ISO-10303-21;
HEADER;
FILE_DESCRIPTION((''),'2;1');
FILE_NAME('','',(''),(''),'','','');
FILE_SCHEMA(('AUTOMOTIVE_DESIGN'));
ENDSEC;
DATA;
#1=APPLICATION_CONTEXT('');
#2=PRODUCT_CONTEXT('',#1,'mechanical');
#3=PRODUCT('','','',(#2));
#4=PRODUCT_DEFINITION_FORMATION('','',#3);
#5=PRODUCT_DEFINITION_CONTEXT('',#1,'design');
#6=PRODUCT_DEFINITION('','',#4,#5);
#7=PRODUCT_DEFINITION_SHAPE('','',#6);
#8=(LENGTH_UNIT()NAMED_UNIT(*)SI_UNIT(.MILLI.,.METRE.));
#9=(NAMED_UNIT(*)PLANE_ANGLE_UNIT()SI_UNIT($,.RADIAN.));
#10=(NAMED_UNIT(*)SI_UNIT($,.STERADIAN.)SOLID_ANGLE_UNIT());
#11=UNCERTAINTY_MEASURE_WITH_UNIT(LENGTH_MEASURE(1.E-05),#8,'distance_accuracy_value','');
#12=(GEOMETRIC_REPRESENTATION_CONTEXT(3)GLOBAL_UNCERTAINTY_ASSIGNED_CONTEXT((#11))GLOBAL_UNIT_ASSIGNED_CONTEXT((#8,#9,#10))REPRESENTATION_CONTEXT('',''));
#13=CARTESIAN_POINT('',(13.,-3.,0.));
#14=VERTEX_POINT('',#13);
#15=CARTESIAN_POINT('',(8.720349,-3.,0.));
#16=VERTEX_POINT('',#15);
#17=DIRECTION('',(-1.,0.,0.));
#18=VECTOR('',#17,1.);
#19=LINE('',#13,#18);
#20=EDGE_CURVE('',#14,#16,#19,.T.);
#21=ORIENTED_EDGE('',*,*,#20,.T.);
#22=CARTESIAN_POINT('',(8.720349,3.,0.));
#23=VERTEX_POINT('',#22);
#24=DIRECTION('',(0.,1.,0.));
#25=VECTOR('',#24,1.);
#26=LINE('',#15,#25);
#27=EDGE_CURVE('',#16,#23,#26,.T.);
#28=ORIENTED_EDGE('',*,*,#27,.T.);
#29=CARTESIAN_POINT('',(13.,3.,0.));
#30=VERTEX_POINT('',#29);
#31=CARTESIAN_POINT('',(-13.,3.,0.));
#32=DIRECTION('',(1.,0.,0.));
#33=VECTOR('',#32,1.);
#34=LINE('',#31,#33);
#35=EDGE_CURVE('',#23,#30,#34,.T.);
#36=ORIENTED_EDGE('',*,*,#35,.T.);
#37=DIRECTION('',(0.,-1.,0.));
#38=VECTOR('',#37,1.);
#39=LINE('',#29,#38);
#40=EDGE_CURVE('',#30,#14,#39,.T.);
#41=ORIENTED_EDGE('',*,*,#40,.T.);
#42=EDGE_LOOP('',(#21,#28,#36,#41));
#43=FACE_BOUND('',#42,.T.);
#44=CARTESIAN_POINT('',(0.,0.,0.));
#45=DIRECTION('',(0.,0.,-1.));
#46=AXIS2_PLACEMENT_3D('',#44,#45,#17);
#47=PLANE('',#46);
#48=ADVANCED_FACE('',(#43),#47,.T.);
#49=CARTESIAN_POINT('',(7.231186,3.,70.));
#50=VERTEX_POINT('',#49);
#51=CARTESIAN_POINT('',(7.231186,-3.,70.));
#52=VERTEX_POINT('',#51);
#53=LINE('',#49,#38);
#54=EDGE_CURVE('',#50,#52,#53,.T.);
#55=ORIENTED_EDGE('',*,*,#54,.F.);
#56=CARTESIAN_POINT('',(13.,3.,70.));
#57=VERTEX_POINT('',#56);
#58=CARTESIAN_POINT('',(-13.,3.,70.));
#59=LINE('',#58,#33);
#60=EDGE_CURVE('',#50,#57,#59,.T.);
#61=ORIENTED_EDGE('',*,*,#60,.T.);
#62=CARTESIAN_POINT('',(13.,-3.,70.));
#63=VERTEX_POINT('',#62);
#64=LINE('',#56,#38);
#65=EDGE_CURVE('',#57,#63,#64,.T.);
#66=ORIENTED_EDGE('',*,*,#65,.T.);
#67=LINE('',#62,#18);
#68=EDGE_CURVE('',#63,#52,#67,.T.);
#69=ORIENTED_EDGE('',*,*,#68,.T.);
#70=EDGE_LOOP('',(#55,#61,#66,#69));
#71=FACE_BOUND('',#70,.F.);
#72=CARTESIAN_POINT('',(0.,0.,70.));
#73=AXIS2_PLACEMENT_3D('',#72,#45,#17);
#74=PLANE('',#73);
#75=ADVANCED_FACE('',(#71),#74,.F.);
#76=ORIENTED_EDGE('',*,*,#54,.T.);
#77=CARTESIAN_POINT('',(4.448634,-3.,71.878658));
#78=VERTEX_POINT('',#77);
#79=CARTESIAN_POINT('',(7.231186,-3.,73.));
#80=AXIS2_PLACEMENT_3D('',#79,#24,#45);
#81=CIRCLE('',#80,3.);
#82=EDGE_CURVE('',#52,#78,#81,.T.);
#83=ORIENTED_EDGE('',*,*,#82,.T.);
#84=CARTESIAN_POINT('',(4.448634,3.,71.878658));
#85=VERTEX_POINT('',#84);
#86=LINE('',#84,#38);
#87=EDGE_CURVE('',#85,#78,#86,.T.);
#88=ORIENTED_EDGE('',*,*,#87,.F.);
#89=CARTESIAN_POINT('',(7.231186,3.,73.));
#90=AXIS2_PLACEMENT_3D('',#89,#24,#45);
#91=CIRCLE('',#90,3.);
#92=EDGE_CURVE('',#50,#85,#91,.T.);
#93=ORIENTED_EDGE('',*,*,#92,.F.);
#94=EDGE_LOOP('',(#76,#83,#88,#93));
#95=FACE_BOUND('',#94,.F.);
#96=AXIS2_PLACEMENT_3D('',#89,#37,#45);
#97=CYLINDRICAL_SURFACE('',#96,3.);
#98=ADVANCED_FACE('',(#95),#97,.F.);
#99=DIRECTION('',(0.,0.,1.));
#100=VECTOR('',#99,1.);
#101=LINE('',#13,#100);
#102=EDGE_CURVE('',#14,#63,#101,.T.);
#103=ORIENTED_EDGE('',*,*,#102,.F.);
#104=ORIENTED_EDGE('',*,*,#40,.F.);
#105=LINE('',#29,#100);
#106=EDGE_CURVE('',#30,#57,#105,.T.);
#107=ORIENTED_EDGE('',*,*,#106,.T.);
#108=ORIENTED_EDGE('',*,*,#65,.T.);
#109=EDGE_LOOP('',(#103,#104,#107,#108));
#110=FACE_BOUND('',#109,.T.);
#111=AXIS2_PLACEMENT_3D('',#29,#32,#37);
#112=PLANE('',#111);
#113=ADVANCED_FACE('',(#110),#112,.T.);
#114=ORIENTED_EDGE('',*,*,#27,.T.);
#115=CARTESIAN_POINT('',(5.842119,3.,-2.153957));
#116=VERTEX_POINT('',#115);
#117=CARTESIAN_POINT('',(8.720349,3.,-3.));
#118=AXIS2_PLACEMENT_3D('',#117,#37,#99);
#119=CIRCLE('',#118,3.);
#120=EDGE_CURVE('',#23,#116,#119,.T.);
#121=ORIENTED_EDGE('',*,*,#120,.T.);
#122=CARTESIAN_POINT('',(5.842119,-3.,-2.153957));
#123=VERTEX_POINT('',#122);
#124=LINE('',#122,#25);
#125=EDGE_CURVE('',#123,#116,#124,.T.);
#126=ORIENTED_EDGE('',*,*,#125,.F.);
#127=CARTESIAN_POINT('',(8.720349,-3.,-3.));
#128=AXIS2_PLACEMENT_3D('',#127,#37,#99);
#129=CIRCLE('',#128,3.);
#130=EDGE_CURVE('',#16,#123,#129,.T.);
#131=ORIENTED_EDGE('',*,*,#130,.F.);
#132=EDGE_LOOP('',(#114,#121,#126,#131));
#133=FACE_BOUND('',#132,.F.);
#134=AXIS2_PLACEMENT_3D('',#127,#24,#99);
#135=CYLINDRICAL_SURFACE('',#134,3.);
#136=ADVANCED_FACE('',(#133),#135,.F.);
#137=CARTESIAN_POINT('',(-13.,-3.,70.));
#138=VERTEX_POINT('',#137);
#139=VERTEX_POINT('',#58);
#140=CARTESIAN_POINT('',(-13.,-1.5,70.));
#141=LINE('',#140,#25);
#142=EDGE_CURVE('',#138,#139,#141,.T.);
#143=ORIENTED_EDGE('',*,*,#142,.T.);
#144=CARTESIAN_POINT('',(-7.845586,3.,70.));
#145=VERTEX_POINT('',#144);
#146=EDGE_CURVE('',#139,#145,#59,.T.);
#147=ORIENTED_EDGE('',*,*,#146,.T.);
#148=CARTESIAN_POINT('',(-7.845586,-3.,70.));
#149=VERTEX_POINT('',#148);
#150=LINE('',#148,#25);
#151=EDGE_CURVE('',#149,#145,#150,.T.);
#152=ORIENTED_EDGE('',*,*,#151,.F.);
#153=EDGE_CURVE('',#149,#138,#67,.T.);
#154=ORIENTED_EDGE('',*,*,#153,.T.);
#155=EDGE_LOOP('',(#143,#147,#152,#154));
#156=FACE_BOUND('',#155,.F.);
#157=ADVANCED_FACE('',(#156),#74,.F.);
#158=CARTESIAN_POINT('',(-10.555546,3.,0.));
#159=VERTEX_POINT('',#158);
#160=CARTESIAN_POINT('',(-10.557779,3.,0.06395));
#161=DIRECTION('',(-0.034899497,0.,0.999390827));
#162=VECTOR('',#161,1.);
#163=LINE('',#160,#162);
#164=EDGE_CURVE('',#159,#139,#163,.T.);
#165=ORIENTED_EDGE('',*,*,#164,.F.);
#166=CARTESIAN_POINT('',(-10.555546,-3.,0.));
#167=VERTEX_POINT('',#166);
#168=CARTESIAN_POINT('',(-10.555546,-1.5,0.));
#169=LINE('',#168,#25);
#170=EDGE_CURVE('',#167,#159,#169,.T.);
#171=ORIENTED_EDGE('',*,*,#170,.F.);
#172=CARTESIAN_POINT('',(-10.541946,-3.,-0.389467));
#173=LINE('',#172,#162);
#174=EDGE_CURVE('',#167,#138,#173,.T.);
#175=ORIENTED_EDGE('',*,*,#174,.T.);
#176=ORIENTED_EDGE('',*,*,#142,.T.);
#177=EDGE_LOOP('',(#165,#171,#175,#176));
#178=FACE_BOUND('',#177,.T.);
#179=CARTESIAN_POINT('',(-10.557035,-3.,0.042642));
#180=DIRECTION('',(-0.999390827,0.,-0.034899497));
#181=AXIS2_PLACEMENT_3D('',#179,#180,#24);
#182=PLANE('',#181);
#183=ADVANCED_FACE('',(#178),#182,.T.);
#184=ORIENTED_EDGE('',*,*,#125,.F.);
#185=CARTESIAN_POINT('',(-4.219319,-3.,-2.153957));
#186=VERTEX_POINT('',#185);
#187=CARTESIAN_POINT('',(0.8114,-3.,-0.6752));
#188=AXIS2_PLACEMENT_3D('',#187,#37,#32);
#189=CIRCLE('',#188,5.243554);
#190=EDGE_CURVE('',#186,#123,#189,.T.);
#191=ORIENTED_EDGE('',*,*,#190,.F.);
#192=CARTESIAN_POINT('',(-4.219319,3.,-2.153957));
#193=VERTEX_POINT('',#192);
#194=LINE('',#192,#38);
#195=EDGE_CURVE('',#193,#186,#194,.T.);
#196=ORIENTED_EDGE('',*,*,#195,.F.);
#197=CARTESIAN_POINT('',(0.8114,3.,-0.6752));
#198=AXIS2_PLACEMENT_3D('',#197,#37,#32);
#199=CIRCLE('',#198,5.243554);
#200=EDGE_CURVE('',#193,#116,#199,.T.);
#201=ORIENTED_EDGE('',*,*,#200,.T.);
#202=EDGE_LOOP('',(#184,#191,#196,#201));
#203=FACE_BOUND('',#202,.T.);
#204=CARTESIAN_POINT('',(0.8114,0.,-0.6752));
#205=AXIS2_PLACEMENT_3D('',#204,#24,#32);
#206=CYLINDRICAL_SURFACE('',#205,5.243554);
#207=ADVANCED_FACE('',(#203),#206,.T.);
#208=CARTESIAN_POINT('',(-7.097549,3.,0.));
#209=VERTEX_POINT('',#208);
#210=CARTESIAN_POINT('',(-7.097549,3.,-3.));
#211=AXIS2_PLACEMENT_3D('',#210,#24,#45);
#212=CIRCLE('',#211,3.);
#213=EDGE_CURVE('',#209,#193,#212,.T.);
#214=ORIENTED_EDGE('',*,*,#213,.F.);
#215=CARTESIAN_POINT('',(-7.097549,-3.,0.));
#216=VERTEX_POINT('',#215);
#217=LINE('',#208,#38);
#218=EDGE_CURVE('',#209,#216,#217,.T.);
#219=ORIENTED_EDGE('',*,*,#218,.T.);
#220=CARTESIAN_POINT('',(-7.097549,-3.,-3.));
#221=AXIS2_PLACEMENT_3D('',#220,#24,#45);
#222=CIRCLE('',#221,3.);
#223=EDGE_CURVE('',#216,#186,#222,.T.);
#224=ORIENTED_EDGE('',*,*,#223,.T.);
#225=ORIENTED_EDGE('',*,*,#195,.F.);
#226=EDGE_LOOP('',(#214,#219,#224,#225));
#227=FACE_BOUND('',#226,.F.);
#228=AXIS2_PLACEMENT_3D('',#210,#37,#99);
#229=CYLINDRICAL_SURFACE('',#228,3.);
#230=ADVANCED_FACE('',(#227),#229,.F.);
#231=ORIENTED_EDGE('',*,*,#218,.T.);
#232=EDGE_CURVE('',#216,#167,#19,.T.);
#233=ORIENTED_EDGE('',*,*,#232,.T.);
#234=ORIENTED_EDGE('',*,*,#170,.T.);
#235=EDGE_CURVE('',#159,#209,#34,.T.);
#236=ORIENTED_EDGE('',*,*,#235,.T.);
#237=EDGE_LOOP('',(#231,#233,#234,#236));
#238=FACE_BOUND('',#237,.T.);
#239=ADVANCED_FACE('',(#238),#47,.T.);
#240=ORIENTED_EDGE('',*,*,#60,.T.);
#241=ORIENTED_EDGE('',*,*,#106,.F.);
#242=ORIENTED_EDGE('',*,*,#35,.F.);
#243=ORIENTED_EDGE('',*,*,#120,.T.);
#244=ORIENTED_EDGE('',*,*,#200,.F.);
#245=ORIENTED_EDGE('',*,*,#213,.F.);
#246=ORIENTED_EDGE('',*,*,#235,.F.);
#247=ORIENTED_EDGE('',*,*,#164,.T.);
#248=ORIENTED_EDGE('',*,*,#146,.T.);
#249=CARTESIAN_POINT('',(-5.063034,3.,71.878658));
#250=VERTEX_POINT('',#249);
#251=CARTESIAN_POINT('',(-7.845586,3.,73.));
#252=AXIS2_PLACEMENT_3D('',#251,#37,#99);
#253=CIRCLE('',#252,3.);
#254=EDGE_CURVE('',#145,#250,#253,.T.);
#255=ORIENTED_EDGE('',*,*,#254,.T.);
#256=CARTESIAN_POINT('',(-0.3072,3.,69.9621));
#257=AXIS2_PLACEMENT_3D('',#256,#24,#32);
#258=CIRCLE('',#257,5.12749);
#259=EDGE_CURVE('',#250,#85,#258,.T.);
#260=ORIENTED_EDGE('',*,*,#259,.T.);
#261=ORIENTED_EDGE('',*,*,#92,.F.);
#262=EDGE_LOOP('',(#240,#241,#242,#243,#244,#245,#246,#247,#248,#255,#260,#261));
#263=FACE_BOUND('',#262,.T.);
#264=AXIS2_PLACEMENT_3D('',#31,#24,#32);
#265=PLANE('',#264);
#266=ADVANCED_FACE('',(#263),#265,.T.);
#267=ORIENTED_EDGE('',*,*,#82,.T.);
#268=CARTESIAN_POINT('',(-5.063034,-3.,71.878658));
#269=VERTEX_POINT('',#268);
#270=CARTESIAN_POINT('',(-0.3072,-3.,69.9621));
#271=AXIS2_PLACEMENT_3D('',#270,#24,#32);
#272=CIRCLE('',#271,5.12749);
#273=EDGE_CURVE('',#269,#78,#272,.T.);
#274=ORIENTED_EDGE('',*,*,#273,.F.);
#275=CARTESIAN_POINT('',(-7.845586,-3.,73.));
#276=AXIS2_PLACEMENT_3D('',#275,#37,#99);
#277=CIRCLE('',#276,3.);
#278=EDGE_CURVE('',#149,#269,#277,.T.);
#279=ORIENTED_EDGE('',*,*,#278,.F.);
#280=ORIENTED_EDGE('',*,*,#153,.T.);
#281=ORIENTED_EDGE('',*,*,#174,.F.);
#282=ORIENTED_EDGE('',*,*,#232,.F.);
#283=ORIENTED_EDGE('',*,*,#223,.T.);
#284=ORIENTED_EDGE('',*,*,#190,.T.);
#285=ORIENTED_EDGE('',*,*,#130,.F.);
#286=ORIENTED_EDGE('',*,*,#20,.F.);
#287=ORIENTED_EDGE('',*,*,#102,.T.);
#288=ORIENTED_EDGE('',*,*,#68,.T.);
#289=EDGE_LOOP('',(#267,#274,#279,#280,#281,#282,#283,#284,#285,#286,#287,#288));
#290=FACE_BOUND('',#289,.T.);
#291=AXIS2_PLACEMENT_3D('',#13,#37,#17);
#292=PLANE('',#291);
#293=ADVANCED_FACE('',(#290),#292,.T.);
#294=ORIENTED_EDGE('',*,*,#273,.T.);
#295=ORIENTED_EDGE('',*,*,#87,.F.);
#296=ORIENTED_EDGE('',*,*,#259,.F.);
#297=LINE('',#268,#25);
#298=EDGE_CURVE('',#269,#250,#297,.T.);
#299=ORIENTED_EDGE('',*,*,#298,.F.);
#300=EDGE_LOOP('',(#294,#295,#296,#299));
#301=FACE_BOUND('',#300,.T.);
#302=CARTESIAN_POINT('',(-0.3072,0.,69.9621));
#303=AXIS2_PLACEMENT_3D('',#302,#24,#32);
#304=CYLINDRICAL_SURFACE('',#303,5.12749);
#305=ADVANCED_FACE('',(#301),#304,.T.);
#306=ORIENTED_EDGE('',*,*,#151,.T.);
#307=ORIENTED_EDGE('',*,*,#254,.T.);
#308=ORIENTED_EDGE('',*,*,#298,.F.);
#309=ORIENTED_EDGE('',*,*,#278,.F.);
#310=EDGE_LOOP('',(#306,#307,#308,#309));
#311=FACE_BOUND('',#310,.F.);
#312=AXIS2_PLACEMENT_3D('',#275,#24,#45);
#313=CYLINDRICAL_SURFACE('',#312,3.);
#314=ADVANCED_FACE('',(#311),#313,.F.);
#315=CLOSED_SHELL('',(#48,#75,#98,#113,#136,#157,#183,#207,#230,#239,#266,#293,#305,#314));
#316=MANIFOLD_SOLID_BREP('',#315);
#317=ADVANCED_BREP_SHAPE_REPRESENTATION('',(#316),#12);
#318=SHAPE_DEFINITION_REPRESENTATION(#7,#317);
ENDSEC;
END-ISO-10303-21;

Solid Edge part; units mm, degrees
sketch "Sketch1" plane through (0, 0, 0) normal (0, 0, 1) x (1, 0, 0)
  line L0 (-13, 3) -> (13, 3)
  line L1 (13, 3) -> (13, -3)
  line L2 (13, -3) -> (-13, -3)
  line L3 (-13, -3) -> (-13, 3)
  dimension "D1" = 26
  dimension "D2" = 6
extrude "Protrusion1" add sketch "Sketch1" along normal blind 70
draft "Draft_2" angle 2 neutral plane through (0, 0, 70) normal (0, 0, 1) pull direction (0, 0, -1) face at (-13, -2.06, 57.6333)
sketch "Sketch2" plane through (0, 0, 0) normal (0, -1, 0) x (1, 0, 0)
  line L0 (-5.4345, 70) -> (4.8202, 70)
  arc A0 (-5.4345, 70) -> (4.8202, 70) centre (-0.3072, 69.9621) cw
  line L1 (-4.3885, 0) -> (6.0113, 0)
  arc A1 (-4.3885, 0) -> (6.0113, 0) centre (0.8114, -0.6752) ccw
extrude "ExtrudedProtrusion_2" add sketch "Sketch2" along normal mid plane 6
fillet "Round_1" radius 3 4 edges at (4.8202, 0, 70) (-5.4345, 0, 70) (6.0113, 0, 0) (-4.3885, 0, 0)
properties part number "3"
